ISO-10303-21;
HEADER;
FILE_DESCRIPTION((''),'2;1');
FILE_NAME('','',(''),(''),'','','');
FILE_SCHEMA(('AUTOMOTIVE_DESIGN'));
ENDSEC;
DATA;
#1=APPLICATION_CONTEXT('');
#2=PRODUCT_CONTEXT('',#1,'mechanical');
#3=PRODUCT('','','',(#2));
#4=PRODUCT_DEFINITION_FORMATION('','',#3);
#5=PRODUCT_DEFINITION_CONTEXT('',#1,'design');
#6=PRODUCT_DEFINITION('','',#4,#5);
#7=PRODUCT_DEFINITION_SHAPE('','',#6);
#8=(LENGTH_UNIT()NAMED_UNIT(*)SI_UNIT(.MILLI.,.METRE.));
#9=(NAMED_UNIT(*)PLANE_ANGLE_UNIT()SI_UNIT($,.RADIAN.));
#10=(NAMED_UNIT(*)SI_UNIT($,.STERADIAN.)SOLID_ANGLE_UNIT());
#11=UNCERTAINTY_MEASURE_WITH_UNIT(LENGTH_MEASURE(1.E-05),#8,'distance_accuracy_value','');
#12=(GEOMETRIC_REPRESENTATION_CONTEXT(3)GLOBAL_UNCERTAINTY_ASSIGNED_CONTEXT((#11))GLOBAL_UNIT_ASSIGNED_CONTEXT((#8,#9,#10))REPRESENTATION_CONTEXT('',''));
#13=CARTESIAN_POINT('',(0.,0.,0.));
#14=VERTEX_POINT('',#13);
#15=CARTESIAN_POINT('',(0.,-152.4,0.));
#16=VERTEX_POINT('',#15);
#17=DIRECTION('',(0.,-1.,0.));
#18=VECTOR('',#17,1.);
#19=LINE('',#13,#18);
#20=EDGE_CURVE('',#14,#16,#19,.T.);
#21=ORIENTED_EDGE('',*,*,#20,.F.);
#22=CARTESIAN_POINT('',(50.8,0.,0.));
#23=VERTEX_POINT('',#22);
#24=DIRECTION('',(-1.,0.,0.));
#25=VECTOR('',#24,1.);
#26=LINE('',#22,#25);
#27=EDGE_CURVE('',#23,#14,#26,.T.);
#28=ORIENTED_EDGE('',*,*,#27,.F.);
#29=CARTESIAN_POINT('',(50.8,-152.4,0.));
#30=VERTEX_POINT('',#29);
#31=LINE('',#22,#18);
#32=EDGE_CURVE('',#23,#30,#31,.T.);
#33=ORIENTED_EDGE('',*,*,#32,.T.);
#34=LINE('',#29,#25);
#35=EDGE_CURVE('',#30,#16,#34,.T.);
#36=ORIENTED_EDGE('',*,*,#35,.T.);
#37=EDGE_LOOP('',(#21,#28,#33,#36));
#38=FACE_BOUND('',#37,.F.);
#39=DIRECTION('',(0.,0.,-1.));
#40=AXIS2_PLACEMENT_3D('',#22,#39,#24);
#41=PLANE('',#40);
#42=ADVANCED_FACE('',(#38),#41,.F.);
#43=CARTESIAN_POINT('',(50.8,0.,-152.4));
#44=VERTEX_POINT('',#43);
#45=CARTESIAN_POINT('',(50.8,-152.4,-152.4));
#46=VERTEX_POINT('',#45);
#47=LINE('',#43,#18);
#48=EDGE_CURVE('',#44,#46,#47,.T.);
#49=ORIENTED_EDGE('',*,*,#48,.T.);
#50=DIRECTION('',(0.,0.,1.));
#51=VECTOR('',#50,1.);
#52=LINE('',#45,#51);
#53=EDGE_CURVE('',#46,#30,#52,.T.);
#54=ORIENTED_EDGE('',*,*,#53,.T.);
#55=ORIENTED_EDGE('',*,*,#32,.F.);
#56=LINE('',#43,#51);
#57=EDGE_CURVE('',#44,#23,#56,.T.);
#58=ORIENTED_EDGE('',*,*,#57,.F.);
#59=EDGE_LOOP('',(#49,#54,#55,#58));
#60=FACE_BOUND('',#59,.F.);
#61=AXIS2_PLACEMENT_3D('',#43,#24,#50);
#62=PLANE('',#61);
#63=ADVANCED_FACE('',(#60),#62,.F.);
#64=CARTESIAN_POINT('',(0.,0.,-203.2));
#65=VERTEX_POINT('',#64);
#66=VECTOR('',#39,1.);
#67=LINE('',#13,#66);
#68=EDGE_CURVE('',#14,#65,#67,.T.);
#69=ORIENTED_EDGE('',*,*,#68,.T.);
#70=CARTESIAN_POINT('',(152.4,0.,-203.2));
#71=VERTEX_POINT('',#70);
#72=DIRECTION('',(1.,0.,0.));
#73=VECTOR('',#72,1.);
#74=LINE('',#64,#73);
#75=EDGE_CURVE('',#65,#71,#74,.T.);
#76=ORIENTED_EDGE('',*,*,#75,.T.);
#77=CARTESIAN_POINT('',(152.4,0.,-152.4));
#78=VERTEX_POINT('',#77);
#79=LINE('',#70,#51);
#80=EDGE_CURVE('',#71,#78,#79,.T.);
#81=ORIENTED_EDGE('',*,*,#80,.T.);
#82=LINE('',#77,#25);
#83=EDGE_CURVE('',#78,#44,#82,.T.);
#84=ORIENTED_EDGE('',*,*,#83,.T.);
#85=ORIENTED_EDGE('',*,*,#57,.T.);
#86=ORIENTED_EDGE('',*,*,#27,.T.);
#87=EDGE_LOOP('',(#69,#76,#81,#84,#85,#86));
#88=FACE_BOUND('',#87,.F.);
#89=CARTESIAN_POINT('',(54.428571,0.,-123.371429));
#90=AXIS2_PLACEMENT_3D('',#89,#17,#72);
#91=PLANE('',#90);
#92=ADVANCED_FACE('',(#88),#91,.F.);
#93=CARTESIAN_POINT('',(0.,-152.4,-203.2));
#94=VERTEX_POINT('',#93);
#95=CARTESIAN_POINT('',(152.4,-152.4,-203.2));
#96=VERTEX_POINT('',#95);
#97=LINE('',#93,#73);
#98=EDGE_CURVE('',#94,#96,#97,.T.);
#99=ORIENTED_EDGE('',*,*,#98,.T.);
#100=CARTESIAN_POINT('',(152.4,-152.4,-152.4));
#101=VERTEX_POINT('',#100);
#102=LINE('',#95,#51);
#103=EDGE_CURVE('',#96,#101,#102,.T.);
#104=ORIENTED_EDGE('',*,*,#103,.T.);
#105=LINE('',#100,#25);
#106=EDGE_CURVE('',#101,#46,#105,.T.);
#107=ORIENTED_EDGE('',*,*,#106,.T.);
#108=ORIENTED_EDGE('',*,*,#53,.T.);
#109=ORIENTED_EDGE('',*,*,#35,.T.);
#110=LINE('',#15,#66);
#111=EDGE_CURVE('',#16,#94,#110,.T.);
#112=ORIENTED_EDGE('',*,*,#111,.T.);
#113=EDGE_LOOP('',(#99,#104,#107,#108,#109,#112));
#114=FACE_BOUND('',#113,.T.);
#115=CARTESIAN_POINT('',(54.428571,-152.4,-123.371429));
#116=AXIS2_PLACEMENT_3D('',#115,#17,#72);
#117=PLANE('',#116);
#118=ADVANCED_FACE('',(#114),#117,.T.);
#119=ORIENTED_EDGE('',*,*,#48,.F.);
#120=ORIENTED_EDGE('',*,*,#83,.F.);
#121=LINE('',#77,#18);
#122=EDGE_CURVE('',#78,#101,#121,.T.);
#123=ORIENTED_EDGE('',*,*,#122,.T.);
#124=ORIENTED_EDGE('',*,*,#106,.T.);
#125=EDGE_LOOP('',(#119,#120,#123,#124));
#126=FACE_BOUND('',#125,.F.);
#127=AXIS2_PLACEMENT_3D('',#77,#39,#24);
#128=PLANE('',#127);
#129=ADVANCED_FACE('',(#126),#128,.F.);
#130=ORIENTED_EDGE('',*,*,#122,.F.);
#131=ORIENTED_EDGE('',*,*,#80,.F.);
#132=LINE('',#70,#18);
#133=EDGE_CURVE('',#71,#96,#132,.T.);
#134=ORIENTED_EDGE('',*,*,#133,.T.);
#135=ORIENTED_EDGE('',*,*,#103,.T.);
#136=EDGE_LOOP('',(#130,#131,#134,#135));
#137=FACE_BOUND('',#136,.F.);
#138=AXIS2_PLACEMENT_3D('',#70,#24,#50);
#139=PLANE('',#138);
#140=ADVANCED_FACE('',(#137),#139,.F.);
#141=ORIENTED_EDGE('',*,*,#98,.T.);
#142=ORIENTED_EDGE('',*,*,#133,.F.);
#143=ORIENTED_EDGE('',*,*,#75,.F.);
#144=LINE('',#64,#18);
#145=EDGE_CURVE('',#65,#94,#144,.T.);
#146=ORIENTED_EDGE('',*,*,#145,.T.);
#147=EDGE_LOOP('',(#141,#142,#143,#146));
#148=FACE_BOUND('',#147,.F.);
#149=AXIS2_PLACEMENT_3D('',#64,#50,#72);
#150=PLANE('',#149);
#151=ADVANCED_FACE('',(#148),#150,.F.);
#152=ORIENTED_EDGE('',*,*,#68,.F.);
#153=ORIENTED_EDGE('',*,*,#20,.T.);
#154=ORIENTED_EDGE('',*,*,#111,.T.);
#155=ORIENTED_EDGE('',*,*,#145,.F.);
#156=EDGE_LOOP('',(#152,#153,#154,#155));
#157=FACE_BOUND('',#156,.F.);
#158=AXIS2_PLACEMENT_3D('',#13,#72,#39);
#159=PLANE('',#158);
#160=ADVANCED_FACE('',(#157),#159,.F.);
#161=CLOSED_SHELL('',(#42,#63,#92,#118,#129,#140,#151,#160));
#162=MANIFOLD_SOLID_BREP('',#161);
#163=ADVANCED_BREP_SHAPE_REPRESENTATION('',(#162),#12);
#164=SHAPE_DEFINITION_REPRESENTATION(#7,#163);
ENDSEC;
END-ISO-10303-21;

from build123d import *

# Parameters (mm, degrees)
F1_DEPTH = 152.4


# Not quite as in the source:
# - a feature names something its author has since deleted; it is built from what else it names


with BuildPart() as f1:
    # F0 (on Front) → F1 (new body)
    with BuildSketch(Plane.XZ):
        Polygon((50.8, 0), (0, 0), (0, -203.2), (152.4, -203.2), (152.4, -152.4), (50.8, -152.4), align=None)
    extrude(amount=F1_DEPTH)


solid = f1.part
